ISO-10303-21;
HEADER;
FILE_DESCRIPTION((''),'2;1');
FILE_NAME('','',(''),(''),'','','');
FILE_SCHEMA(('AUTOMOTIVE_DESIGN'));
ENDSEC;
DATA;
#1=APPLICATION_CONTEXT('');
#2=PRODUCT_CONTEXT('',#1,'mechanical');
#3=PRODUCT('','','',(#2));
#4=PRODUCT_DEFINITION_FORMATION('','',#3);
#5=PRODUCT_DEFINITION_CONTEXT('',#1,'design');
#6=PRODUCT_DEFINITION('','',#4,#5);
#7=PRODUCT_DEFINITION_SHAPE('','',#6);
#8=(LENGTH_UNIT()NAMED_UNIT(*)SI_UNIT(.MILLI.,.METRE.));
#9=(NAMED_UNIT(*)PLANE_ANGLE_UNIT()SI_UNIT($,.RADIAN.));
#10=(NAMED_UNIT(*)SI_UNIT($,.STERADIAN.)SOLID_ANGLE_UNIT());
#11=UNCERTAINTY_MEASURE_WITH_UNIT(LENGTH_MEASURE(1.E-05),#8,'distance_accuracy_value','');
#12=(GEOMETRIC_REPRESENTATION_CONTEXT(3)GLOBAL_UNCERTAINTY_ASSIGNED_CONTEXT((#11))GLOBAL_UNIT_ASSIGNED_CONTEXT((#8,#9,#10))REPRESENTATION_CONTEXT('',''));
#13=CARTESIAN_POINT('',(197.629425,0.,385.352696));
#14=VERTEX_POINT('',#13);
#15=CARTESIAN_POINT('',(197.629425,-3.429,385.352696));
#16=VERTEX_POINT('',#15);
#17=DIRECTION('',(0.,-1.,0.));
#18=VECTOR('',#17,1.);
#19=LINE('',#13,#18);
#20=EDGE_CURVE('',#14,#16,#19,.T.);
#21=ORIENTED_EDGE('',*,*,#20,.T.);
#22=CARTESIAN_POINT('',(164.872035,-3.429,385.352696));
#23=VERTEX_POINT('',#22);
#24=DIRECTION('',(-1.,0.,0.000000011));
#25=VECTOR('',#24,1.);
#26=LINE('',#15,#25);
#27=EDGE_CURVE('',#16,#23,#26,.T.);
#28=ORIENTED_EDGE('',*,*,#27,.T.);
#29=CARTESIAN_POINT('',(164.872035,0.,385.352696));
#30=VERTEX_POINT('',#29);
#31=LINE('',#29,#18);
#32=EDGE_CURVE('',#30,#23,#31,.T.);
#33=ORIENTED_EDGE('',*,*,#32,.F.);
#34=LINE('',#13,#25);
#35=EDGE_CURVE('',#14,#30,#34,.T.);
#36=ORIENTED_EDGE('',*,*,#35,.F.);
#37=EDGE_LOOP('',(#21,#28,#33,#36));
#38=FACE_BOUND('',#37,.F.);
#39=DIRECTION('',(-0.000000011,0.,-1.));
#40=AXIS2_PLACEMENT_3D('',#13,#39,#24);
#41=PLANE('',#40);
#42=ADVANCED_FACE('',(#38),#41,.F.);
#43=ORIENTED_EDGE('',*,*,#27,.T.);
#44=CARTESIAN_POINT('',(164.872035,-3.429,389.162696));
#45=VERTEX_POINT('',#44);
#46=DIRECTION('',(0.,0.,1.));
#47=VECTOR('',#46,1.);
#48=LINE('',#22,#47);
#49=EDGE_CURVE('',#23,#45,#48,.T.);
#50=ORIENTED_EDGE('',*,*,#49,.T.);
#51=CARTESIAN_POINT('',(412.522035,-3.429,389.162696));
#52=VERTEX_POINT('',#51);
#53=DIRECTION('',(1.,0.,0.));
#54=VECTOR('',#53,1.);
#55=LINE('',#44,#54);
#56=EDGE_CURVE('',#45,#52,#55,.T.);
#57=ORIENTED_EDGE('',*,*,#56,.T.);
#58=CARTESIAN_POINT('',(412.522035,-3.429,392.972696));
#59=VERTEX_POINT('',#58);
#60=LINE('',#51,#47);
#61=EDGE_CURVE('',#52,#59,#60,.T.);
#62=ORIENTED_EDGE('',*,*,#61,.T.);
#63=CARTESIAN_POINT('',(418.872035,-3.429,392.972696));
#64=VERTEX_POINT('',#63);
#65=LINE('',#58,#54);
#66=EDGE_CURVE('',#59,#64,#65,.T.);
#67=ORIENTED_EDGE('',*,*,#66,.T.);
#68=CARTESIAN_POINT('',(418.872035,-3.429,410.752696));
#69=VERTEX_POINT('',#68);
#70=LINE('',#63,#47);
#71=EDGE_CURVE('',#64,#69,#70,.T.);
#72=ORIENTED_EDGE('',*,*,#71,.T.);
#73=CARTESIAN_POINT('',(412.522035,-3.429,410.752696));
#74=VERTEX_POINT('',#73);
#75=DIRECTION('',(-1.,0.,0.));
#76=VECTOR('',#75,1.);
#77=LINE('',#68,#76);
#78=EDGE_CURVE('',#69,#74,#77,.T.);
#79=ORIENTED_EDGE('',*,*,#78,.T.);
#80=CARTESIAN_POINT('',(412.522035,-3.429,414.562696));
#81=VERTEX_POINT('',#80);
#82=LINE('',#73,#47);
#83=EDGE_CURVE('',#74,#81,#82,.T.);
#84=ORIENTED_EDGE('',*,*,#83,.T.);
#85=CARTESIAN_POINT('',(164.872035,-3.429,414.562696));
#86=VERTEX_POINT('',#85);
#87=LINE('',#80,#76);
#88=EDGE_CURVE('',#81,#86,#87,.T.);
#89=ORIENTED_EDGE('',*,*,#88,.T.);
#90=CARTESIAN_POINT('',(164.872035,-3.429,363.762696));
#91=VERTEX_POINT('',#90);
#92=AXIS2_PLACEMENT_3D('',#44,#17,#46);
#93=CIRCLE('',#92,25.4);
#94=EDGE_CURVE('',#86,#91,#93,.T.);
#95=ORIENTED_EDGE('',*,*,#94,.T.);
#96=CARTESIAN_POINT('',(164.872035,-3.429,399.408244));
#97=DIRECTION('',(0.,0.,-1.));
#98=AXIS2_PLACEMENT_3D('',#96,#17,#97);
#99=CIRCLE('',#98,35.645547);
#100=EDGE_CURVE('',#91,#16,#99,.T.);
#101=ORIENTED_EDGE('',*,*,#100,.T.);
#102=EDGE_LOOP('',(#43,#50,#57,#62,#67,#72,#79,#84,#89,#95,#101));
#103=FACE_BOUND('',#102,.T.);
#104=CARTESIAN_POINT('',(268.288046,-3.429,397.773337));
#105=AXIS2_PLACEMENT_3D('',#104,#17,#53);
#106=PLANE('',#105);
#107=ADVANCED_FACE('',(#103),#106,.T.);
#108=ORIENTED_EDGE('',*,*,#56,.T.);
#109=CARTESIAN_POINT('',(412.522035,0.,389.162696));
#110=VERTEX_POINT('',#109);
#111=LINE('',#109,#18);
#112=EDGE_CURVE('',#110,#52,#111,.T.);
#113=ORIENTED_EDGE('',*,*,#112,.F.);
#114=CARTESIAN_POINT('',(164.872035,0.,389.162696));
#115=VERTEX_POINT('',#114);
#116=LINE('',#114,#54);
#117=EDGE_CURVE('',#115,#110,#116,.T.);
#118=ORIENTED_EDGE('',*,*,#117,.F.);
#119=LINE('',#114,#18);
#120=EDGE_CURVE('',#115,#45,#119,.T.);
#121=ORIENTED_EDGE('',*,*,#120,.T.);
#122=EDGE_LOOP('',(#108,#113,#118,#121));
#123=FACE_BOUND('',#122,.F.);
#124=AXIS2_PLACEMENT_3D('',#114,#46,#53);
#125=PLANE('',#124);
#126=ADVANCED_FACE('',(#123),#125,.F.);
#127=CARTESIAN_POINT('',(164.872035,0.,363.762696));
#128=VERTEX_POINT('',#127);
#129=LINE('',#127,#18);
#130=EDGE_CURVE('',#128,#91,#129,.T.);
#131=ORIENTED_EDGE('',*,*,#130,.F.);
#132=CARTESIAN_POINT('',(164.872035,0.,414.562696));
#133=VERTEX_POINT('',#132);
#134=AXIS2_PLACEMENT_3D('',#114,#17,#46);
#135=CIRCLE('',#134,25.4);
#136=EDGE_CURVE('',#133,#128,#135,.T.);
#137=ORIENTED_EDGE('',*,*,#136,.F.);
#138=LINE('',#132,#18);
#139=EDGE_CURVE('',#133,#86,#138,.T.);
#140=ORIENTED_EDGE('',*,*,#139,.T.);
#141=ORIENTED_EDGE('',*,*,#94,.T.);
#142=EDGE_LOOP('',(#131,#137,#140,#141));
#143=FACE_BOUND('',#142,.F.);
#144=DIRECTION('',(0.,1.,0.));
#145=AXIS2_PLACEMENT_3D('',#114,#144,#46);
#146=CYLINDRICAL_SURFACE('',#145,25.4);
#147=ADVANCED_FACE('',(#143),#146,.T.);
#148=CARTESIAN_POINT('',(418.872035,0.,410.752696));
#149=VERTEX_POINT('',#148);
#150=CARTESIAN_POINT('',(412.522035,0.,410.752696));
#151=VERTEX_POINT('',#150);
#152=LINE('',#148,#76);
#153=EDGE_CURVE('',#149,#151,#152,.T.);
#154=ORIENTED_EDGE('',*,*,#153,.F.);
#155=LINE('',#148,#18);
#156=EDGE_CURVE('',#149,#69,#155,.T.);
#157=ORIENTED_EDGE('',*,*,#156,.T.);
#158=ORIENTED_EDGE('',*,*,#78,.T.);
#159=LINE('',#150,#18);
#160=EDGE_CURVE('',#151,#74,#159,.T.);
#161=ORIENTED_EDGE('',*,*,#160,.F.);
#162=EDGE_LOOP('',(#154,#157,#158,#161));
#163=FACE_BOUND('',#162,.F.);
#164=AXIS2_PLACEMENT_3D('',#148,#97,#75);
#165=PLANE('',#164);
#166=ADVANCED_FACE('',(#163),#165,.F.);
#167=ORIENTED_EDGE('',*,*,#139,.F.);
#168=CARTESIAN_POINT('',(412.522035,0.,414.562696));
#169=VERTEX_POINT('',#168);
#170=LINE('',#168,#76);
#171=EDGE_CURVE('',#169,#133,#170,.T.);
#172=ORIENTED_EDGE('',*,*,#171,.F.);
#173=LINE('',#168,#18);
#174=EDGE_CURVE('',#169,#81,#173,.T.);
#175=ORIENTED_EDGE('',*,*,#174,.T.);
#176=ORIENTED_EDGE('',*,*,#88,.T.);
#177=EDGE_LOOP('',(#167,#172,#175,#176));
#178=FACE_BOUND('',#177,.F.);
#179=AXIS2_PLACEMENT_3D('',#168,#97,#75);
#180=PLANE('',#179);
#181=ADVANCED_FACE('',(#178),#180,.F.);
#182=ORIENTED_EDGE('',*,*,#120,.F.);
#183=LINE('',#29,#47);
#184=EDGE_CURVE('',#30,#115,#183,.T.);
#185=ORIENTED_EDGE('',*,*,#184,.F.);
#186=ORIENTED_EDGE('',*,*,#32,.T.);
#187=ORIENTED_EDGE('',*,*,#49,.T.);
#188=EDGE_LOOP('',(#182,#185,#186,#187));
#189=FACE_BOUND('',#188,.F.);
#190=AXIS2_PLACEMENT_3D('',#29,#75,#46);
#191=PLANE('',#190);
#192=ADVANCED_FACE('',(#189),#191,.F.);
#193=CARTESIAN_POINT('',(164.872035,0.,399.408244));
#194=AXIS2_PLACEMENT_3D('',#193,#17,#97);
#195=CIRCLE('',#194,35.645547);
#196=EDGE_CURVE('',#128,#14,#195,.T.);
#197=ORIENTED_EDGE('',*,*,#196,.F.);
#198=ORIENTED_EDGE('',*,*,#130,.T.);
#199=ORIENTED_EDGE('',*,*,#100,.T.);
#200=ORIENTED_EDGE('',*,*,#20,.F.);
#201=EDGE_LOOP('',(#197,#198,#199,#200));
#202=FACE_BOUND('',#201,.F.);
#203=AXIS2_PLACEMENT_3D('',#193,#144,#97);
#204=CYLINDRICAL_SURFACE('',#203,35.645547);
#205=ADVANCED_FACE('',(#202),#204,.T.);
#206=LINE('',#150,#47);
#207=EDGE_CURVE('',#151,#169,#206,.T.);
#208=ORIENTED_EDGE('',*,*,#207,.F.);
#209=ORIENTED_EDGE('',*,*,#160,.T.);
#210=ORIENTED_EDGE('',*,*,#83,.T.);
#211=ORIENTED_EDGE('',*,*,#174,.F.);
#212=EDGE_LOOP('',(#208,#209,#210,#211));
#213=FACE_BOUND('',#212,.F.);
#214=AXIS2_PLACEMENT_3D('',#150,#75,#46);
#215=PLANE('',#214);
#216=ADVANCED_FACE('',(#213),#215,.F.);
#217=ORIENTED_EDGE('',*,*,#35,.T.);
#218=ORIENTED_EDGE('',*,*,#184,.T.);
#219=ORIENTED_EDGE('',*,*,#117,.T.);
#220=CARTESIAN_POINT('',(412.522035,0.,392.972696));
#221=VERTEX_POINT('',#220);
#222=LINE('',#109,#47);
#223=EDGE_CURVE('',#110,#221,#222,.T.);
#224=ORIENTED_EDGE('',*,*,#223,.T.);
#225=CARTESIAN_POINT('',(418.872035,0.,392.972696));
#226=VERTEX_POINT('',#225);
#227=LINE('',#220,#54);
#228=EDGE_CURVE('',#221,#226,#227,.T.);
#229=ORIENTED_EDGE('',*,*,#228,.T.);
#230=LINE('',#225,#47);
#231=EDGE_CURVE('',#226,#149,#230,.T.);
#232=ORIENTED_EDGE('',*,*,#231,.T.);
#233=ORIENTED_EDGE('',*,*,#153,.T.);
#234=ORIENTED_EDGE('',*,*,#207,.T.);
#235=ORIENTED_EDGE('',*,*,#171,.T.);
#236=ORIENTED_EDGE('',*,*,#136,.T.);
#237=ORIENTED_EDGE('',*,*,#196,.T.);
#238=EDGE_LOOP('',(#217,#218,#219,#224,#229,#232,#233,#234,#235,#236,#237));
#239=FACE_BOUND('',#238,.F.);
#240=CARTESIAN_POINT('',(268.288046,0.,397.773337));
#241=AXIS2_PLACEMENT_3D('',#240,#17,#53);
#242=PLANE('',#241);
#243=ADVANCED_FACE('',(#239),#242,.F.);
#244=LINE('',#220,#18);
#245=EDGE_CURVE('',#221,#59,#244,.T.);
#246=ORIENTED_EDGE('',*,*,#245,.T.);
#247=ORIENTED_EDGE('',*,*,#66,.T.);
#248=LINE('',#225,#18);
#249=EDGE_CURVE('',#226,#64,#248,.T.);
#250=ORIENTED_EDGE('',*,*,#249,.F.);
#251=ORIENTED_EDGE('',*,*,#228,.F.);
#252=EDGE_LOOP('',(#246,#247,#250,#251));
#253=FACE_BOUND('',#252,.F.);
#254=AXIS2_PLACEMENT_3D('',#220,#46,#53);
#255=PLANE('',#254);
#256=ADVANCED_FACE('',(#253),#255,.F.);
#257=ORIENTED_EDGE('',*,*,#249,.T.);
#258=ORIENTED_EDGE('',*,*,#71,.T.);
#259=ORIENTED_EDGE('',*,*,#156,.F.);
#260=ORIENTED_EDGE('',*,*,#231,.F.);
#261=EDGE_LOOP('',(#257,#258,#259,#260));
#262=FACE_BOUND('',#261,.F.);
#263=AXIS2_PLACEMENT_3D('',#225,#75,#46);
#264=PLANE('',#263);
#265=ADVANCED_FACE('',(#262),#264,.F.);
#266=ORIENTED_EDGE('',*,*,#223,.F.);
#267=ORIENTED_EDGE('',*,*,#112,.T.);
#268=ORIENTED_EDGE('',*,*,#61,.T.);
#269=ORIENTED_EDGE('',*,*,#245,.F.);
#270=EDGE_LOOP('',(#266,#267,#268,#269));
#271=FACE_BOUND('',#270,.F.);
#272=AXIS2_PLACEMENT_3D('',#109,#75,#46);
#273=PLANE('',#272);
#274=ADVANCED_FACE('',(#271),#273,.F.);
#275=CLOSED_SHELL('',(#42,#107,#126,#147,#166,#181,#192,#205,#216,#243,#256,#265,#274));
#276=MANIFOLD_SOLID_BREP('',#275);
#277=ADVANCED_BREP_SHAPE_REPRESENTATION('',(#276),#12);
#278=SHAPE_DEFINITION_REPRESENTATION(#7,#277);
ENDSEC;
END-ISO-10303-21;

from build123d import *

# Parameters (mm, degrees)
F1_DEPTH = 3.429


# Not quite as in the source:
# - ends of sketch curves that miss each other by under 0.0002 mm in the source are joined


with BuildPart() as f1:
    # F0 (on Front) → F1 (new body)
    with BuildSketch(Plane.XZ):
        with BuildLine():
            Line((412.522035, 410.7526964), (412.522035, 414.5626964))
            Line((412.522035, 414.5626964), (164.872035, 414.5626964))
            ThreePointArc((164.872035, 414.5626964), (139.472035, 389.1626964), (164.872035, 363.7626964))
            ThreePointArc((164.872035, 363.7626964), (184.4881935266, 369.6456603814), (197.6294252739, 385.352696025))
            Line((197.6294252739, 385.352696025), (164.872035, 385.3526964))
            Line((164.872035, 385.3526964), (164.872035, 389.1626964))
            Line((164.872035, 389.1626964), (412.522035, 389.1626964))
            Line((412.522035, 389.1626964), (412.522035, 392.9726964))
            Line((412.522035, 392.9726964), (418.872035, 392.9726964))
            Line((418.872035, 392.9726964), (418.872035, 410.7526964))
            Line((418.872035, 410.7526964), (412.522035, 410.7526964))
        make_face()
    extrude(amount=F1_DEPTH)


solid = f1.part
